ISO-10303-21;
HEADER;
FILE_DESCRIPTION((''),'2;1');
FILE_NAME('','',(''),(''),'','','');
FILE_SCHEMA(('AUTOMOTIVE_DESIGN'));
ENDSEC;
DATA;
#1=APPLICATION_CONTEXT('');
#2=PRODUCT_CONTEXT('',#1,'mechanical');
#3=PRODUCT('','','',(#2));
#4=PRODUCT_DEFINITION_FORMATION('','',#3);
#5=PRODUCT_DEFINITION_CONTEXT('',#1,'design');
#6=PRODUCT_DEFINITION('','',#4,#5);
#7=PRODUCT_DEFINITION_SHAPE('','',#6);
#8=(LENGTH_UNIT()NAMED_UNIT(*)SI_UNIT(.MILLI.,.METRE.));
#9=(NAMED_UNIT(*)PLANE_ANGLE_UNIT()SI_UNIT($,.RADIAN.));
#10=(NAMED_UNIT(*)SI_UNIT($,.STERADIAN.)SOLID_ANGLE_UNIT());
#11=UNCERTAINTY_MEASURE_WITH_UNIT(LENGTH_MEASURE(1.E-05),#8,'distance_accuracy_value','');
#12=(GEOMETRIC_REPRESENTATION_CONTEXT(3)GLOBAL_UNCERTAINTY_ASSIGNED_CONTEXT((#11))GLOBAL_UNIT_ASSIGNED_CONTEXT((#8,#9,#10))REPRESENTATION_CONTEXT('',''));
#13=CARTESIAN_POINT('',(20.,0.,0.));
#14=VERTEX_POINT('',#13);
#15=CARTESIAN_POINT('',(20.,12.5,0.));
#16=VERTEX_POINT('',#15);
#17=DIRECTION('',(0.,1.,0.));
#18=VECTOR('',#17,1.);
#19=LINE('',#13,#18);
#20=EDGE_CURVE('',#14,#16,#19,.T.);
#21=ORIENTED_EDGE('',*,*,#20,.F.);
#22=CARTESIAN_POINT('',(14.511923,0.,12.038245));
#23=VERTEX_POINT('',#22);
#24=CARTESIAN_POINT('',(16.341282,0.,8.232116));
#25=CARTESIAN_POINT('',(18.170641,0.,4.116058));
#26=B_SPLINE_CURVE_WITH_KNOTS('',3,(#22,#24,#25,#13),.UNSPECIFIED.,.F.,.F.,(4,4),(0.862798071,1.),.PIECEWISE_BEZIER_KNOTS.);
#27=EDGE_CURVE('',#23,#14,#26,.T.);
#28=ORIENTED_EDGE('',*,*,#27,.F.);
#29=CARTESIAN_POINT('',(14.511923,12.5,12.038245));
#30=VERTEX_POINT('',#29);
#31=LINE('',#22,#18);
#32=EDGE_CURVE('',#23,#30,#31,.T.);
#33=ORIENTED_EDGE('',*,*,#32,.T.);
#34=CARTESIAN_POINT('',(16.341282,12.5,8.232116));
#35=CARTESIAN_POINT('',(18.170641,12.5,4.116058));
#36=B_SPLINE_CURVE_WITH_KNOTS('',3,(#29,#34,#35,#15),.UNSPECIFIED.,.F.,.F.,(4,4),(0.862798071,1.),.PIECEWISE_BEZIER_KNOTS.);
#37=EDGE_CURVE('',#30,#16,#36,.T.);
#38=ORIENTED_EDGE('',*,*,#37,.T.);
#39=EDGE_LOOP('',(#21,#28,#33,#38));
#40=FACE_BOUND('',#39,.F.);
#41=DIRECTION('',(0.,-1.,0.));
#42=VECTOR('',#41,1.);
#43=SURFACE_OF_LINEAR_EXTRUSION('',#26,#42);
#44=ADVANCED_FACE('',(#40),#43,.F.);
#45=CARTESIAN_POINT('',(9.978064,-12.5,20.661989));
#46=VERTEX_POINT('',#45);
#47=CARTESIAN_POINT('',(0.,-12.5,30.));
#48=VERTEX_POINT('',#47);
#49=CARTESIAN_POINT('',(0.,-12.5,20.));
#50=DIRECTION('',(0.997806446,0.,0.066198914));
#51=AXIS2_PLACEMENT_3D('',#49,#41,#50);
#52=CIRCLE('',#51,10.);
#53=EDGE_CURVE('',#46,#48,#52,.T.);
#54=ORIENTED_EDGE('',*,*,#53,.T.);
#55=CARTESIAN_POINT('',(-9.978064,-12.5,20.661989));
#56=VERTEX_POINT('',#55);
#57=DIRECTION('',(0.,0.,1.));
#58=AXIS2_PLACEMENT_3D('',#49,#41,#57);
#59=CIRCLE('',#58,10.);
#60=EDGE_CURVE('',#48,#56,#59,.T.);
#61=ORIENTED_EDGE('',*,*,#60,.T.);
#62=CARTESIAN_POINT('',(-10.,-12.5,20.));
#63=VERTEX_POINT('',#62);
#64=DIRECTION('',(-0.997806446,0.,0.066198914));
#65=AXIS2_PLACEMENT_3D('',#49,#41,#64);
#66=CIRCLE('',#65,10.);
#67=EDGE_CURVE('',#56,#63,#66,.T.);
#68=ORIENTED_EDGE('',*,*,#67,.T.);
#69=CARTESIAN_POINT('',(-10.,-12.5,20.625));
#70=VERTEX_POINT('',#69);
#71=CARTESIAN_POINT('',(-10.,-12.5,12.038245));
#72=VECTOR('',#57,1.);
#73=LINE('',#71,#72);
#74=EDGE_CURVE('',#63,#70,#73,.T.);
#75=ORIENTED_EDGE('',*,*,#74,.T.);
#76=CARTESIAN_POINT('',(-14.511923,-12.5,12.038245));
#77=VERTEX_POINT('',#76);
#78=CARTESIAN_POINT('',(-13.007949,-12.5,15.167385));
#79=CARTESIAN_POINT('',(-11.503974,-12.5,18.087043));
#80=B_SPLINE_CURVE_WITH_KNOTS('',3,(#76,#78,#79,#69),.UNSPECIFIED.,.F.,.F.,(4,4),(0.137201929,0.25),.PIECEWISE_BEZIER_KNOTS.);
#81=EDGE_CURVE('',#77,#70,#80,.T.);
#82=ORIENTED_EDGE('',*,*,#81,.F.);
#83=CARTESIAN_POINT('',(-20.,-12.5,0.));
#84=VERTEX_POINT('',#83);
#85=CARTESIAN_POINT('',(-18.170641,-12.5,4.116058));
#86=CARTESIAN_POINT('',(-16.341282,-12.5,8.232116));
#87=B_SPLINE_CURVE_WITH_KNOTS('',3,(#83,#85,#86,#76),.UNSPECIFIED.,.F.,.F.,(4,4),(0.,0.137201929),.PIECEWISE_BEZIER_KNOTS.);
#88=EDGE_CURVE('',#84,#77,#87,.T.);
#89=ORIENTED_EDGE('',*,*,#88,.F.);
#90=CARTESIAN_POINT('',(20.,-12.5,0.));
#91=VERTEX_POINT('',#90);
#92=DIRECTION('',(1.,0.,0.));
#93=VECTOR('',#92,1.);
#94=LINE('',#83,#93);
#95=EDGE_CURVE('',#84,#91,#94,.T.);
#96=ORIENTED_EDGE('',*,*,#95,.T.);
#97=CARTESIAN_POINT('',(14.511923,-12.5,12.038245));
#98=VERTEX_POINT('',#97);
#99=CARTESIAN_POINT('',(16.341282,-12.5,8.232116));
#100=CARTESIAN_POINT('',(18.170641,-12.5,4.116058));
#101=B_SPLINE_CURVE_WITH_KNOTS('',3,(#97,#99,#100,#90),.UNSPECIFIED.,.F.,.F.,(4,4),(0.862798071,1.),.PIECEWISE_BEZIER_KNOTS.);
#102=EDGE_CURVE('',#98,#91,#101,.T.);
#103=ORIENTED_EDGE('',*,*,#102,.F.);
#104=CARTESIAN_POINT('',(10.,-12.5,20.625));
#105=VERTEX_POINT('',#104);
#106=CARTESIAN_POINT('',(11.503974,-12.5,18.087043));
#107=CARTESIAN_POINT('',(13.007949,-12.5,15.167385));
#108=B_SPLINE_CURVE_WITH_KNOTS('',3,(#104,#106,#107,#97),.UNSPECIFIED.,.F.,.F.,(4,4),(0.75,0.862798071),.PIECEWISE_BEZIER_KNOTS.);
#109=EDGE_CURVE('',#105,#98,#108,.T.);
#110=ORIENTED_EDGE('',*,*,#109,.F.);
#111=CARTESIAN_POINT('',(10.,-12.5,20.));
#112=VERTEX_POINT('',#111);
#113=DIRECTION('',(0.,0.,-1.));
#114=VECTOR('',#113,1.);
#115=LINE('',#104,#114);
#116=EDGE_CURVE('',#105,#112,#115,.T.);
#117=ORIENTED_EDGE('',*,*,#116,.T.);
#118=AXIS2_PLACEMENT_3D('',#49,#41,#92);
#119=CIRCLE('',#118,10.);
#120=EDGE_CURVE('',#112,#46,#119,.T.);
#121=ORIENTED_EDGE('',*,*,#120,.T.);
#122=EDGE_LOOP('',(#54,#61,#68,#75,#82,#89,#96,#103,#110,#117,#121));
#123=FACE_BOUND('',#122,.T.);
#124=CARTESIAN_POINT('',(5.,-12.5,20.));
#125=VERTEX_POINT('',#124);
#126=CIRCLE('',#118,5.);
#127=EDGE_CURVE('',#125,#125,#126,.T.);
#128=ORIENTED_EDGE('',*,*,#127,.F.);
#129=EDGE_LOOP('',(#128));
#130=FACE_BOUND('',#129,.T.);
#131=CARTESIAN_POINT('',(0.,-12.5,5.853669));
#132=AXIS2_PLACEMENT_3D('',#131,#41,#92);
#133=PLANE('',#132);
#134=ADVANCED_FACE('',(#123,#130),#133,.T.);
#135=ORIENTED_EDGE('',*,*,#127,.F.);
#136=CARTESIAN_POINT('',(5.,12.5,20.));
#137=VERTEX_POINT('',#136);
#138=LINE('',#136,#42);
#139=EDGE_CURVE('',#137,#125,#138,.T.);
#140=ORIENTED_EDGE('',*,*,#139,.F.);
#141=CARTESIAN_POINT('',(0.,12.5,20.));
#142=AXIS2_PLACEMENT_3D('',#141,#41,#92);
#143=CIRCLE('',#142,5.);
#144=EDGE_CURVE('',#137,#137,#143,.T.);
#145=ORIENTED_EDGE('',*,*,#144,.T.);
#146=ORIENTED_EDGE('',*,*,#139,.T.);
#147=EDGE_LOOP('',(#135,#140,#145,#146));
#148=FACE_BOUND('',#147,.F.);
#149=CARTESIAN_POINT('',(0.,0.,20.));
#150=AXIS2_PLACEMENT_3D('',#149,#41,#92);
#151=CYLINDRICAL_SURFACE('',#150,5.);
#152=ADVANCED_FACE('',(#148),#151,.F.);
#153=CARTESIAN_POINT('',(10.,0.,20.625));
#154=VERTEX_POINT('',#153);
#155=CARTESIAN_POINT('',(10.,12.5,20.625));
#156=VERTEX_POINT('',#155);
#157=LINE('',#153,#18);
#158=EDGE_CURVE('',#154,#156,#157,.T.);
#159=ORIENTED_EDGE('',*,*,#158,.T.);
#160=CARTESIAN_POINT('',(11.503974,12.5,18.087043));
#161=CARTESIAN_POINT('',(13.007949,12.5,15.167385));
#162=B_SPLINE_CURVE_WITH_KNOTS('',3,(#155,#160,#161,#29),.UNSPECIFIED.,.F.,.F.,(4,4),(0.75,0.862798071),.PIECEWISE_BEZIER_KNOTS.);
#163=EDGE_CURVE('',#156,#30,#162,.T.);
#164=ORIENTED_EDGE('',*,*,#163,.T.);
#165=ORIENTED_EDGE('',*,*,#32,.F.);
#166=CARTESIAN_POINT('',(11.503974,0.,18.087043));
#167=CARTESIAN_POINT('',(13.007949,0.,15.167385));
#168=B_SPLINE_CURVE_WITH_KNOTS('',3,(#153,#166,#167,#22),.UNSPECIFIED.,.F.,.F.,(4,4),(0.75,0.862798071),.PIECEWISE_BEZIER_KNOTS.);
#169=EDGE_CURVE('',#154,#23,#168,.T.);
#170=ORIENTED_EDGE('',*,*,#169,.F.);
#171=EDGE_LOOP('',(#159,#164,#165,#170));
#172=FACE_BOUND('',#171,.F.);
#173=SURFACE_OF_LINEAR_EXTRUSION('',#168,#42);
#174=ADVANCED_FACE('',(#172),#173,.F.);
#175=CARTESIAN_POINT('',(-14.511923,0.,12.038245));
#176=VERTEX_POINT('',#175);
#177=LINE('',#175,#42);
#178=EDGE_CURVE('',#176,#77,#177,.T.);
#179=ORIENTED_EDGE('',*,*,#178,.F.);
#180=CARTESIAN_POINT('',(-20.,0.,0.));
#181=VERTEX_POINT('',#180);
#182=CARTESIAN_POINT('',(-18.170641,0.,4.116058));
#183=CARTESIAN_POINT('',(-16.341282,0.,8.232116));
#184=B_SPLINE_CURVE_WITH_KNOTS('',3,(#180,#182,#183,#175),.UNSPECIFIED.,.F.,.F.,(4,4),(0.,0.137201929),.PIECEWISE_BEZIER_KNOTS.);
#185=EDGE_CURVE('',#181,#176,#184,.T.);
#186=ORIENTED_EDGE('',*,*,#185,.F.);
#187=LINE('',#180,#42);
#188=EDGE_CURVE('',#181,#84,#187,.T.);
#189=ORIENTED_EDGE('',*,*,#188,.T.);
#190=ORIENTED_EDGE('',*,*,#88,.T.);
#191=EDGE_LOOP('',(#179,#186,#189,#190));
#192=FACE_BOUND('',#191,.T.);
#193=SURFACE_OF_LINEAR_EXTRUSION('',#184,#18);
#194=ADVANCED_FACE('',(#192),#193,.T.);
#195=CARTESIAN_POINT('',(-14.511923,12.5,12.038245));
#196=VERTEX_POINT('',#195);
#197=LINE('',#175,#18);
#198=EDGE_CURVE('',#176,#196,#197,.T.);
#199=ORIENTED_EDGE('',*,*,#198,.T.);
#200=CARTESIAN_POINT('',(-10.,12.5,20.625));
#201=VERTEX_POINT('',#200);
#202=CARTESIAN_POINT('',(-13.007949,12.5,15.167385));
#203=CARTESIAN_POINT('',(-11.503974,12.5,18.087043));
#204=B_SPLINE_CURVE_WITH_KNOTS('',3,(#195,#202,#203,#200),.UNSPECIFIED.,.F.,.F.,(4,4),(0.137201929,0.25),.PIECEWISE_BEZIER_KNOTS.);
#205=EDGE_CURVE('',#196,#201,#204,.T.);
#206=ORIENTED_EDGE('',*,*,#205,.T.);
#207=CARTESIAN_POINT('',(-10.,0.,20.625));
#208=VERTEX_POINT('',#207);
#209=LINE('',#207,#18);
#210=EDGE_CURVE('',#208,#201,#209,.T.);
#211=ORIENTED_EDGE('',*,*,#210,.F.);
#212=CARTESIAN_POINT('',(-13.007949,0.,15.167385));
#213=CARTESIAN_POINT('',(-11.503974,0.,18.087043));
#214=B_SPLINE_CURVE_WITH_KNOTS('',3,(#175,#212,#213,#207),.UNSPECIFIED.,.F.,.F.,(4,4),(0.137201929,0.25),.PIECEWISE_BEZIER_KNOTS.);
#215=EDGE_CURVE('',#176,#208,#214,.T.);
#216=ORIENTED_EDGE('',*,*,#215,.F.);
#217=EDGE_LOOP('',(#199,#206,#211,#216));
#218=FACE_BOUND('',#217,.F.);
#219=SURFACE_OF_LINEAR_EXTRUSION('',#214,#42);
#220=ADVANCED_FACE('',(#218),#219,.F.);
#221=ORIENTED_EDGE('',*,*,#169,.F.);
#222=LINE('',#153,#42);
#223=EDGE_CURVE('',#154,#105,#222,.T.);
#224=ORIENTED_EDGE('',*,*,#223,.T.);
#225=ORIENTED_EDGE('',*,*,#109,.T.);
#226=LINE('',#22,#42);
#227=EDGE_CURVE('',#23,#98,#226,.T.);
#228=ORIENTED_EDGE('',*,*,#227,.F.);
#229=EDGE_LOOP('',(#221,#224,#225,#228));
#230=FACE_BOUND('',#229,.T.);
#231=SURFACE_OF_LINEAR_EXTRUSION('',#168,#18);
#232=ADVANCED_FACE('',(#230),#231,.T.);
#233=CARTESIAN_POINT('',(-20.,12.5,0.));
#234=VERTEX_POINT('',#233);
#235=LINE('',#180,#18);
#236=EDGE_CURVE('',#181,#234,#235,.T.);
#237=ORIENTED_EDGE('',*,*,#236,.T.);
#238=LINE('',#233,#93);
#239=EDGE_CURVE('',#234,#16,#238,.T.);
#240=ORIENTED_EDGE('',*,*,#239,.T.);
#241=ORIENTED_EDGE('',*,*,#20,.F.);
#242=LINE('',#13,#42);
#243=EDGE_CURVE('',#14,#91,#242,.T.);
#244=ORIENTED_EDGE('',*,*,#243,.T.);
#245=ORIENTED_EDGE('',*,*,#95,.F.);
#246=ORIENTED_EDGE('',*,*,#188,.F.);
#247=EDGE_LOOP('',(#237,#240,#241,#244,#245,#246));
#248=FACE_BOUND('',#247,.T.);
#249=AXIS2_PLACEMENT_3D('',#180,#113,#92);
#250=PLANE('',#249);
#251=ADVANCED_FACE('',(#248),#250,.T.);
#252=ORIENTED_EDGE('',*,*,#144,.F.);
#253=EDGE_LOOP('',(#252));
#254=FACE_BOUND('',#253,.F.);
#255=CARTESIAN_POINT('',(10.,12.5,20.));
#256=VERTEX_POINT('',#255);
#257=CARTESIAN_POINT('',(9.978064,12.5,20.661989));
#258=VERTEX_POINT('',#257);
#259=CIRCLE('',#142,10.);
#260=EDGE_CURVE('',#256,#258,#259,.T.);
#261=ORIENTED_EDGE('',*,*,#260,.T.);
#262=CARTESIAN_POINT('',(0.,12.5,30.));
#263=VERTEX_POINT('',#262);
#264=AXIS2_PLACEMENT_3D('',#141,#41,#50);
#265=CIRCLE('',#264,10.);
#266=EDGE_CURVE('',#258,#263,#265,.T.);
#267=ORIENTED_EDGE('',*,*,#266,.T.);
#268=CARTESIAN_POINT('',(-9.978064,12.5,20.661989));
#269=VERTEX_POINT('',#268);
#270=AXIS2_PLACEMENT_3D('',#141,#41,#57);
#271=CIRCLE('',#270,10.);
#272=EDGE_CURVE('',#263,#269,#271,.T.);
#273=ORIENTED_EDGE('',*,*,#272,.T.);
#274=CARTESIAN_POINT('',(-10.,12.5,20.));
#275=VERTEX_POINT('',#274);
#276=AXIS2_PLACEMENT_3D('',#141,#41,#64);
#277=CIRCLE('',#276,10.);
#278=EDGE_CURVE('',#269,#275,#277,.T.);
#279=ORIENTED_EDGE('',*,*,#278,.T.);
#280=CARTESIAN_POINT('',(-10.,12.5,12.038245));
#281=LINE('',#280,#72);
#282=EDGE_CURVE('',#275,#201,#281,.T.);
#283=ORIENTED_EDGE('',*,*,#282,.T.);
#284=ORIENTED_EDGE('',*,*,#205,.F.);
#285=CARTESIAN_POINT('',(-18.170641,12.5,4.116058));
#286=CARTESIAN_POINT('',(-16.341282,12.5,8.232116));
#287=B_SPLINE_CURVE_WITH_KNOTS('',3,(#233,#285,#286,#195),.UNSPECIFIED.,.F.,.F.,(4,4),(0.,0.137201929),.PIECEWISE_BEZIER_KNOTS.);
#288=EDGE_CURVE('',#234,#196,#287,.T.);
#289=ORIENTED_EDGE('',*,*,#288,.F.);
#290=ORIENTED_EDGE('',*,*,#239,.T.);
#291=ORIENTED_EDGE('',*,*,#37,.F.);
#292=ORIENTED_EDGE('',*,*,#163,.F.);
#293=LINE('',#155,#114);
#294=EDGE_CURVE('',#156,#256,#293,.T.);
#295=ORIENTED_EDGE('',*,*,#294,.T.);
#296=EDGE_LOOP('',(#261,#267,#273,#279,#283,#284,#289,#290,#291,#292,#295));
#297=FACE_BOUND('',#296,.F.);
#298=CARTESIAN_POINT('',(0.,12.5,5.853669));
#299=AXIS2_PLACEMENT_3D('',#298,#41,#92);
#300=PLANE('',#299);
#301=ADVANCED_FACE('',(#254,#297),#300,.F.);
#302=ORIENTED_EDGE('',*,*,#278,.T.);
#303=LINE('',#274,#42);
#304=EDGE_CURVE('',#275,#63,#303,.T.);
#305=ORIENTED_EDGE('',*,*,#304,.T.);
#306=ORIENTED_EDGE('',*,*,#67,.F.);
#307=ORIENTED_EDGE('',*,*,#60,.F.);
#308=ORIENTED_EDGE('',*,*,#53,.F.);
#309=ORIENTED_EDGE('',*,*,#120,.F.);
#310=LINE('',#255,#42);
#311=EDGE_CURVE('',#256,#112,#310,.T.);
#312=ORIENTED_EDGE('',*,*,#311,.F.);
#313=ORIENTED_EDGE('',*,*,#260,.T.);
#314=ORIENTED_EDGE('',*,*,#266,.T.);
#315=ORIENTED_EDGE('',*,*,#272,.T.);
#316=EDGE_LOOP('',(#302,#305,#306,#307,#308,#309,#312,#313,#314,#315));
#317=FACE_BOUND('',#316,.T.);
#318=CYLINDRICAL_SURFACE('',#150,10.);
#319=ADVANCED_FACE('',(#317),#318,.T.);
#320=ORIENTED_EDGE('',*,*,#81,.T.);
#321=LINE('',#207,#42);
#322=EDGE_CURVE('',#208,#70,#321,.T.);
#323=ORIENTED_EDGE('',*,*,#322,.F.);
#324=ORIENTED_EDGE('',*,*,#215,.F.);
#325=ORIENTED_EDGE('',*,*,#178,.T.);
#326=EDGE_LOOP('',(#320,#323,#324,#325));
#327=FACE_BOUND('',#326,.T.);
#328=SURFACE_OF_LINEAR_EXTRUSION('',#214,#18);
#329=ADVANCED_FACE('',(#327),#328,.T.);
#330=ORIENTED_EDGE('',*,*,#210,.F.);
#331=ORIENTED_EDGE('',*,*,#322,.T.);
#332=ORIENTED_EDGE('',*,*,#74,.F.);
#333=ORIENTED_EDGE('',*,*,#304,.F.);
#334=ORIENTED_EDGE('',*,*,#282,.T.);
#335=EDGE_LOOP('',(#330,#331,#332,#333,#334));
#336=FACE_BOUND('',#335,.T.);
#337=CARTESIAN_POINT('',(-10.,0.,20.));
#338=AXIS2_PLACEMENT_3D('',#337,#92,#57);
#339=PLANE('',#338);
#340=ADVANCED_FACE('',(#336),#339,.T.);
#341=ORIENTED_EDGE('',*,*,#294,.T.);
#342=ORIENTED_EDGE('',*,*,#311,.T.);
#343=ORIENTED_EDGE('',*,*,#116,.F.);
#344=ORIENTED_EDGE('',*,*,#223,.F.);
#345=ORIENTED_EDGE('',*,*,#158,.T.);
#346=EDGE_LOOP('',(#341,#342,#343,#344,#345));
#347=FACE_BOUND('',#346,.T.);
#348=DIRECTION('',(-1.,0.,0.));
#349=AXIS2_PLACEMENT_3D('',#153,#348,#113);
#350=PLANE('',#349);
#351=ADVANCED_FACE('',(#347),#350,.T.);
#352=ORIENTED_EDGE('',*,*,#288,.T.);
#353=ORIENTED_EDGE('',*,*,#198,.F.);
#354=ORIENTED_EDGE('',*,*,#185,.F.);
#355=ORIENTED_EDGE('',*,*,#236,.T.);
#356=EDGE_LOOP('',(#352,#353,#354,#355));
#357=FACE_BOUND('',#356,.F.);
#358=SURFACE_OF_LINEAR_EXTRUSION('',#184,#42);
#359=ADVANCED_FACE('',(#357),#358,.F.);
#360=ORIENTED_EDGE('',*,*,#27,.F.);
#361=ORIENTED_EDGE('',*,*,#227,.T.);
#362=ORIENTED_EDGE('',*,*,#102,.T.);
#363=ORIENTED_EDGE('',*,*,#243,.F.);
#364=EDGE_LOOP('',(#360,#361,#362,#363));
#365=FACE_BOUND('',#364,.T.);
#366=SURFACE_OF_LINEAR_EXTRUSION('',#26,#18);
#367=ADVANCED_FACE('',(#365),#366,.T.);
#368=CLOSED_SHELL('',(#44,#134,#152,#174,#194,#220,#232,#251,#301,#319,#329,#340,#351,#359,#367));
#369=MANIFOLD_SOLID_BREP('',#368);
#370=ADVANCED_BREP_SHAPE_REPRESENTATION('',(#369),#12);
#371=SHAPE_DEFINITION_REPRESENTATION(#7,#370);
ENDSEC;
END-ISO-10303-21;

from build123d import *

# Parameters (mm, degrees)
F2_DEPTH = 12.5
F0_R     = 5
F3_DEPTH = 12.5


with BuildPart() as f2:
    # F1 (on Front) → F2 (new body, symmetric)
    with BuildSketch(Plane.XZ):
        with BuildLine():
            Line((-10, 0), (10, 0))
            Line((10, 0), (10, 12.0382448658))
            Line((10, 12.0382448658), (6.0506574175, 12.0382448658))
            ThreePointArc((6.0506574175, 12.0382448658), (0, 10), (-6.0506574175, 12.0382448658))
            Line((-6.0506574175, 12.0382448658), (-10, 12.0382448658))
            Line((-10, 12.0382448658), (-10, 0))
        make_face()
        with BuildLine():
            Line((10, 12.0382448658), (10, 0))
            Line((10, 0), (20, 0))
            add(Edge.make_bspline(
                [(14.5119228257, 12.0382448658), (16.3412818838, 8.2321157615), (18.1706409419, 4.1160578807), (20, 0)],
                knots=[0.8627980706, 0.8627980706, 0.8627980706, 0.8627980706, 1, 1, 1, 1], degree=3))
            Line((14.5119228257, 12.0382448658), (10, 12.0382448658))
        make_face()
        with BuildLine():
            Line((-20, 0), (-10, 0))
            Line((-10, 0), (-10, 12.0382448658))
            Line((-10, 12.0382448658), (-14.5119228257, 12.0382448658))
            add(Edge.make_bspline(
                [(-20, 0), (-18.1706409419, 4.1160578807), (-16.3412818838, 8.2321157615), (-14.5119228257, 12.0382448658)],
                knots=[0, 0, 0, 0, 0.1372019294, 0.1372019294, 0.1372019294, 0.1372019294], degree=3))
        make_face()
        with BuildLine():
            Line((6.0506574175, 12.0382448658), (10, 12.0382448658))
            Line((10, 12.0382448658), (10, 20))
            ThreePointArc((10, 20), (8.958419899, 15.556272633), (6.0506574175, 12.0382448658))
        make_face()
        with BuildLine():
            Line((10, 20), (10, 12.0382448658))
            Line((10, 12.0382448658), (14.5119228257, 12.0382448658))
            add(Edge.make_bspline(
                [(10, 20.625), (11.5039742752, 18.0870434106), (13.0079485504, 15.1673846789), (14.5119228257, 12.0382448658)],
                knots=[0.75, 0.75, 0.75, 0.75, 0.8627980706, 0.8627980706, 0.8627980706, 0.8627980706], degree=3))
            Line((10, 20.625), (10, 20))
        make_face()
        with BuildLine():
            Line((-14.5119228257, 12.0382448658), (-10, 12.0382448658))
            Line((-10, 12.0382448658), (-10, 20))
            Line((-10, 20), (-10, 20.625))
            add(Edge.make_bspline(
                [(-14.5119228257, 12.0382448658), (-13.0079485504, 15.1673846789), (-11.5039742752, 18.0870434106), (-10, 20.625)],
                knots=[0.1372019294, 0.1372019294, 0.1372019294, 0.1372019294, 0.25, 0.25, 0.25, 0.25], degree=3))
        make_face()
        with BuildLine():
            Line((-10, 20), (-10, 12.0382448658))
            Line((-10, 12.0382448658), (-6.0506574175, 12.0382448658))
            ThreePointArc((-6.0506574175, 12.0382448658), (-8.958419899, 15.556272633), (-10, 20))
        make_face()
        with BuildLine():
            ThreePointArc((6.0506574175, 12.0382448658), (8.958419899, 15.556272633), (10, 20))
            ThreePointArc((10, 20), (9.9945146107, 20.3311762316), (9.9780644607, 20.661989137))
            add(Edge.make_bspline(
                [(0, 30), (3.3260214869, 30), (6.6520429738, 26.2664336107), (9.9780644607, 20.661989137)],
                knots=[0.5, 0.5, 0.5, 0.5, 0.7494516115, 0.7494516115, 0.7494516115, 0.7494516115], degree=3))
            add(Edge.make_bspline(
                [(-9.9780644607, 20.661989137), (-6.6520429738, 26.2664336107), (-3.3260214869, 30), (0, 30)],
                knots=[0.2505483885, 0.2505483885, 0.2505483885, 0.2505483885, 0.5, 0.5, 0.5, 0.5], degree=3))
            ThreePointArc((-9.9780644607, 20.661989137), (-9.9945146107, 20.3311762316), (-10, 20))
            ThreePointArc((-10, 20), (-8.958419899, 15.556272633), (-6.0506574175, 12.0382448658))
            Line((-6.0506574175, 12.0382448658), (6.0506574175, 12.0382448658))
        make_face()
        with BuildLine():
            ThreePointArc((-6.0506574175, 12.0382448658), (0, 10), (6.0506574175, 12.0382448658))
            Line((6.0506574175, 12.0382448658), (-6.0506574175, 12.0382448658))
        make_face()
        with BuildLine():
            add(Edge.make_bspline(
                [(0, 30), (3.3260214869, 30), (6.6520429738, 26.2664336107), (9.9780644607, 20.661989137)],
                knots=[0.5, 0.5, 0.5, 0.5, 0.7494516115, 0.7494516115, 0.7494516115, 0.7494516115], degree=3))
            ThreePointArc((9.9780644607, 20.661989137), (6.8330120968, 27.301366015), (0, 30))
        make_face()
        with BuildLine():
            ThreePointArc((0, 30), (-6.8330120968, 27.301366015), (-9.9780644607, 20.661989137))
            add(Edge.make_bspline(
                [(-9.9780644607, 20.661989137), (-6.6520429738, 26.2664336107), (-3.3260214869, 30), (0, 30)],
                knots=[0.2505483885, 0.2505483885, 0.2505483885, 0.2505483885, 0.5, 0.5, 0.5, 0.5], degree=3))
        make_face()
    extrude(amount=F2_DEPTH, both=True)

    # F0 (on Front) → F3 (cut, symmetric)
    with BuildSketch(Plane.XZ):
        with Locations((0, 20)):
            Circle(F0_R)
    extrude(amount=F3_DEPTH, both=True, mode=Mode.SUBTRACT)


solid = f2.part
